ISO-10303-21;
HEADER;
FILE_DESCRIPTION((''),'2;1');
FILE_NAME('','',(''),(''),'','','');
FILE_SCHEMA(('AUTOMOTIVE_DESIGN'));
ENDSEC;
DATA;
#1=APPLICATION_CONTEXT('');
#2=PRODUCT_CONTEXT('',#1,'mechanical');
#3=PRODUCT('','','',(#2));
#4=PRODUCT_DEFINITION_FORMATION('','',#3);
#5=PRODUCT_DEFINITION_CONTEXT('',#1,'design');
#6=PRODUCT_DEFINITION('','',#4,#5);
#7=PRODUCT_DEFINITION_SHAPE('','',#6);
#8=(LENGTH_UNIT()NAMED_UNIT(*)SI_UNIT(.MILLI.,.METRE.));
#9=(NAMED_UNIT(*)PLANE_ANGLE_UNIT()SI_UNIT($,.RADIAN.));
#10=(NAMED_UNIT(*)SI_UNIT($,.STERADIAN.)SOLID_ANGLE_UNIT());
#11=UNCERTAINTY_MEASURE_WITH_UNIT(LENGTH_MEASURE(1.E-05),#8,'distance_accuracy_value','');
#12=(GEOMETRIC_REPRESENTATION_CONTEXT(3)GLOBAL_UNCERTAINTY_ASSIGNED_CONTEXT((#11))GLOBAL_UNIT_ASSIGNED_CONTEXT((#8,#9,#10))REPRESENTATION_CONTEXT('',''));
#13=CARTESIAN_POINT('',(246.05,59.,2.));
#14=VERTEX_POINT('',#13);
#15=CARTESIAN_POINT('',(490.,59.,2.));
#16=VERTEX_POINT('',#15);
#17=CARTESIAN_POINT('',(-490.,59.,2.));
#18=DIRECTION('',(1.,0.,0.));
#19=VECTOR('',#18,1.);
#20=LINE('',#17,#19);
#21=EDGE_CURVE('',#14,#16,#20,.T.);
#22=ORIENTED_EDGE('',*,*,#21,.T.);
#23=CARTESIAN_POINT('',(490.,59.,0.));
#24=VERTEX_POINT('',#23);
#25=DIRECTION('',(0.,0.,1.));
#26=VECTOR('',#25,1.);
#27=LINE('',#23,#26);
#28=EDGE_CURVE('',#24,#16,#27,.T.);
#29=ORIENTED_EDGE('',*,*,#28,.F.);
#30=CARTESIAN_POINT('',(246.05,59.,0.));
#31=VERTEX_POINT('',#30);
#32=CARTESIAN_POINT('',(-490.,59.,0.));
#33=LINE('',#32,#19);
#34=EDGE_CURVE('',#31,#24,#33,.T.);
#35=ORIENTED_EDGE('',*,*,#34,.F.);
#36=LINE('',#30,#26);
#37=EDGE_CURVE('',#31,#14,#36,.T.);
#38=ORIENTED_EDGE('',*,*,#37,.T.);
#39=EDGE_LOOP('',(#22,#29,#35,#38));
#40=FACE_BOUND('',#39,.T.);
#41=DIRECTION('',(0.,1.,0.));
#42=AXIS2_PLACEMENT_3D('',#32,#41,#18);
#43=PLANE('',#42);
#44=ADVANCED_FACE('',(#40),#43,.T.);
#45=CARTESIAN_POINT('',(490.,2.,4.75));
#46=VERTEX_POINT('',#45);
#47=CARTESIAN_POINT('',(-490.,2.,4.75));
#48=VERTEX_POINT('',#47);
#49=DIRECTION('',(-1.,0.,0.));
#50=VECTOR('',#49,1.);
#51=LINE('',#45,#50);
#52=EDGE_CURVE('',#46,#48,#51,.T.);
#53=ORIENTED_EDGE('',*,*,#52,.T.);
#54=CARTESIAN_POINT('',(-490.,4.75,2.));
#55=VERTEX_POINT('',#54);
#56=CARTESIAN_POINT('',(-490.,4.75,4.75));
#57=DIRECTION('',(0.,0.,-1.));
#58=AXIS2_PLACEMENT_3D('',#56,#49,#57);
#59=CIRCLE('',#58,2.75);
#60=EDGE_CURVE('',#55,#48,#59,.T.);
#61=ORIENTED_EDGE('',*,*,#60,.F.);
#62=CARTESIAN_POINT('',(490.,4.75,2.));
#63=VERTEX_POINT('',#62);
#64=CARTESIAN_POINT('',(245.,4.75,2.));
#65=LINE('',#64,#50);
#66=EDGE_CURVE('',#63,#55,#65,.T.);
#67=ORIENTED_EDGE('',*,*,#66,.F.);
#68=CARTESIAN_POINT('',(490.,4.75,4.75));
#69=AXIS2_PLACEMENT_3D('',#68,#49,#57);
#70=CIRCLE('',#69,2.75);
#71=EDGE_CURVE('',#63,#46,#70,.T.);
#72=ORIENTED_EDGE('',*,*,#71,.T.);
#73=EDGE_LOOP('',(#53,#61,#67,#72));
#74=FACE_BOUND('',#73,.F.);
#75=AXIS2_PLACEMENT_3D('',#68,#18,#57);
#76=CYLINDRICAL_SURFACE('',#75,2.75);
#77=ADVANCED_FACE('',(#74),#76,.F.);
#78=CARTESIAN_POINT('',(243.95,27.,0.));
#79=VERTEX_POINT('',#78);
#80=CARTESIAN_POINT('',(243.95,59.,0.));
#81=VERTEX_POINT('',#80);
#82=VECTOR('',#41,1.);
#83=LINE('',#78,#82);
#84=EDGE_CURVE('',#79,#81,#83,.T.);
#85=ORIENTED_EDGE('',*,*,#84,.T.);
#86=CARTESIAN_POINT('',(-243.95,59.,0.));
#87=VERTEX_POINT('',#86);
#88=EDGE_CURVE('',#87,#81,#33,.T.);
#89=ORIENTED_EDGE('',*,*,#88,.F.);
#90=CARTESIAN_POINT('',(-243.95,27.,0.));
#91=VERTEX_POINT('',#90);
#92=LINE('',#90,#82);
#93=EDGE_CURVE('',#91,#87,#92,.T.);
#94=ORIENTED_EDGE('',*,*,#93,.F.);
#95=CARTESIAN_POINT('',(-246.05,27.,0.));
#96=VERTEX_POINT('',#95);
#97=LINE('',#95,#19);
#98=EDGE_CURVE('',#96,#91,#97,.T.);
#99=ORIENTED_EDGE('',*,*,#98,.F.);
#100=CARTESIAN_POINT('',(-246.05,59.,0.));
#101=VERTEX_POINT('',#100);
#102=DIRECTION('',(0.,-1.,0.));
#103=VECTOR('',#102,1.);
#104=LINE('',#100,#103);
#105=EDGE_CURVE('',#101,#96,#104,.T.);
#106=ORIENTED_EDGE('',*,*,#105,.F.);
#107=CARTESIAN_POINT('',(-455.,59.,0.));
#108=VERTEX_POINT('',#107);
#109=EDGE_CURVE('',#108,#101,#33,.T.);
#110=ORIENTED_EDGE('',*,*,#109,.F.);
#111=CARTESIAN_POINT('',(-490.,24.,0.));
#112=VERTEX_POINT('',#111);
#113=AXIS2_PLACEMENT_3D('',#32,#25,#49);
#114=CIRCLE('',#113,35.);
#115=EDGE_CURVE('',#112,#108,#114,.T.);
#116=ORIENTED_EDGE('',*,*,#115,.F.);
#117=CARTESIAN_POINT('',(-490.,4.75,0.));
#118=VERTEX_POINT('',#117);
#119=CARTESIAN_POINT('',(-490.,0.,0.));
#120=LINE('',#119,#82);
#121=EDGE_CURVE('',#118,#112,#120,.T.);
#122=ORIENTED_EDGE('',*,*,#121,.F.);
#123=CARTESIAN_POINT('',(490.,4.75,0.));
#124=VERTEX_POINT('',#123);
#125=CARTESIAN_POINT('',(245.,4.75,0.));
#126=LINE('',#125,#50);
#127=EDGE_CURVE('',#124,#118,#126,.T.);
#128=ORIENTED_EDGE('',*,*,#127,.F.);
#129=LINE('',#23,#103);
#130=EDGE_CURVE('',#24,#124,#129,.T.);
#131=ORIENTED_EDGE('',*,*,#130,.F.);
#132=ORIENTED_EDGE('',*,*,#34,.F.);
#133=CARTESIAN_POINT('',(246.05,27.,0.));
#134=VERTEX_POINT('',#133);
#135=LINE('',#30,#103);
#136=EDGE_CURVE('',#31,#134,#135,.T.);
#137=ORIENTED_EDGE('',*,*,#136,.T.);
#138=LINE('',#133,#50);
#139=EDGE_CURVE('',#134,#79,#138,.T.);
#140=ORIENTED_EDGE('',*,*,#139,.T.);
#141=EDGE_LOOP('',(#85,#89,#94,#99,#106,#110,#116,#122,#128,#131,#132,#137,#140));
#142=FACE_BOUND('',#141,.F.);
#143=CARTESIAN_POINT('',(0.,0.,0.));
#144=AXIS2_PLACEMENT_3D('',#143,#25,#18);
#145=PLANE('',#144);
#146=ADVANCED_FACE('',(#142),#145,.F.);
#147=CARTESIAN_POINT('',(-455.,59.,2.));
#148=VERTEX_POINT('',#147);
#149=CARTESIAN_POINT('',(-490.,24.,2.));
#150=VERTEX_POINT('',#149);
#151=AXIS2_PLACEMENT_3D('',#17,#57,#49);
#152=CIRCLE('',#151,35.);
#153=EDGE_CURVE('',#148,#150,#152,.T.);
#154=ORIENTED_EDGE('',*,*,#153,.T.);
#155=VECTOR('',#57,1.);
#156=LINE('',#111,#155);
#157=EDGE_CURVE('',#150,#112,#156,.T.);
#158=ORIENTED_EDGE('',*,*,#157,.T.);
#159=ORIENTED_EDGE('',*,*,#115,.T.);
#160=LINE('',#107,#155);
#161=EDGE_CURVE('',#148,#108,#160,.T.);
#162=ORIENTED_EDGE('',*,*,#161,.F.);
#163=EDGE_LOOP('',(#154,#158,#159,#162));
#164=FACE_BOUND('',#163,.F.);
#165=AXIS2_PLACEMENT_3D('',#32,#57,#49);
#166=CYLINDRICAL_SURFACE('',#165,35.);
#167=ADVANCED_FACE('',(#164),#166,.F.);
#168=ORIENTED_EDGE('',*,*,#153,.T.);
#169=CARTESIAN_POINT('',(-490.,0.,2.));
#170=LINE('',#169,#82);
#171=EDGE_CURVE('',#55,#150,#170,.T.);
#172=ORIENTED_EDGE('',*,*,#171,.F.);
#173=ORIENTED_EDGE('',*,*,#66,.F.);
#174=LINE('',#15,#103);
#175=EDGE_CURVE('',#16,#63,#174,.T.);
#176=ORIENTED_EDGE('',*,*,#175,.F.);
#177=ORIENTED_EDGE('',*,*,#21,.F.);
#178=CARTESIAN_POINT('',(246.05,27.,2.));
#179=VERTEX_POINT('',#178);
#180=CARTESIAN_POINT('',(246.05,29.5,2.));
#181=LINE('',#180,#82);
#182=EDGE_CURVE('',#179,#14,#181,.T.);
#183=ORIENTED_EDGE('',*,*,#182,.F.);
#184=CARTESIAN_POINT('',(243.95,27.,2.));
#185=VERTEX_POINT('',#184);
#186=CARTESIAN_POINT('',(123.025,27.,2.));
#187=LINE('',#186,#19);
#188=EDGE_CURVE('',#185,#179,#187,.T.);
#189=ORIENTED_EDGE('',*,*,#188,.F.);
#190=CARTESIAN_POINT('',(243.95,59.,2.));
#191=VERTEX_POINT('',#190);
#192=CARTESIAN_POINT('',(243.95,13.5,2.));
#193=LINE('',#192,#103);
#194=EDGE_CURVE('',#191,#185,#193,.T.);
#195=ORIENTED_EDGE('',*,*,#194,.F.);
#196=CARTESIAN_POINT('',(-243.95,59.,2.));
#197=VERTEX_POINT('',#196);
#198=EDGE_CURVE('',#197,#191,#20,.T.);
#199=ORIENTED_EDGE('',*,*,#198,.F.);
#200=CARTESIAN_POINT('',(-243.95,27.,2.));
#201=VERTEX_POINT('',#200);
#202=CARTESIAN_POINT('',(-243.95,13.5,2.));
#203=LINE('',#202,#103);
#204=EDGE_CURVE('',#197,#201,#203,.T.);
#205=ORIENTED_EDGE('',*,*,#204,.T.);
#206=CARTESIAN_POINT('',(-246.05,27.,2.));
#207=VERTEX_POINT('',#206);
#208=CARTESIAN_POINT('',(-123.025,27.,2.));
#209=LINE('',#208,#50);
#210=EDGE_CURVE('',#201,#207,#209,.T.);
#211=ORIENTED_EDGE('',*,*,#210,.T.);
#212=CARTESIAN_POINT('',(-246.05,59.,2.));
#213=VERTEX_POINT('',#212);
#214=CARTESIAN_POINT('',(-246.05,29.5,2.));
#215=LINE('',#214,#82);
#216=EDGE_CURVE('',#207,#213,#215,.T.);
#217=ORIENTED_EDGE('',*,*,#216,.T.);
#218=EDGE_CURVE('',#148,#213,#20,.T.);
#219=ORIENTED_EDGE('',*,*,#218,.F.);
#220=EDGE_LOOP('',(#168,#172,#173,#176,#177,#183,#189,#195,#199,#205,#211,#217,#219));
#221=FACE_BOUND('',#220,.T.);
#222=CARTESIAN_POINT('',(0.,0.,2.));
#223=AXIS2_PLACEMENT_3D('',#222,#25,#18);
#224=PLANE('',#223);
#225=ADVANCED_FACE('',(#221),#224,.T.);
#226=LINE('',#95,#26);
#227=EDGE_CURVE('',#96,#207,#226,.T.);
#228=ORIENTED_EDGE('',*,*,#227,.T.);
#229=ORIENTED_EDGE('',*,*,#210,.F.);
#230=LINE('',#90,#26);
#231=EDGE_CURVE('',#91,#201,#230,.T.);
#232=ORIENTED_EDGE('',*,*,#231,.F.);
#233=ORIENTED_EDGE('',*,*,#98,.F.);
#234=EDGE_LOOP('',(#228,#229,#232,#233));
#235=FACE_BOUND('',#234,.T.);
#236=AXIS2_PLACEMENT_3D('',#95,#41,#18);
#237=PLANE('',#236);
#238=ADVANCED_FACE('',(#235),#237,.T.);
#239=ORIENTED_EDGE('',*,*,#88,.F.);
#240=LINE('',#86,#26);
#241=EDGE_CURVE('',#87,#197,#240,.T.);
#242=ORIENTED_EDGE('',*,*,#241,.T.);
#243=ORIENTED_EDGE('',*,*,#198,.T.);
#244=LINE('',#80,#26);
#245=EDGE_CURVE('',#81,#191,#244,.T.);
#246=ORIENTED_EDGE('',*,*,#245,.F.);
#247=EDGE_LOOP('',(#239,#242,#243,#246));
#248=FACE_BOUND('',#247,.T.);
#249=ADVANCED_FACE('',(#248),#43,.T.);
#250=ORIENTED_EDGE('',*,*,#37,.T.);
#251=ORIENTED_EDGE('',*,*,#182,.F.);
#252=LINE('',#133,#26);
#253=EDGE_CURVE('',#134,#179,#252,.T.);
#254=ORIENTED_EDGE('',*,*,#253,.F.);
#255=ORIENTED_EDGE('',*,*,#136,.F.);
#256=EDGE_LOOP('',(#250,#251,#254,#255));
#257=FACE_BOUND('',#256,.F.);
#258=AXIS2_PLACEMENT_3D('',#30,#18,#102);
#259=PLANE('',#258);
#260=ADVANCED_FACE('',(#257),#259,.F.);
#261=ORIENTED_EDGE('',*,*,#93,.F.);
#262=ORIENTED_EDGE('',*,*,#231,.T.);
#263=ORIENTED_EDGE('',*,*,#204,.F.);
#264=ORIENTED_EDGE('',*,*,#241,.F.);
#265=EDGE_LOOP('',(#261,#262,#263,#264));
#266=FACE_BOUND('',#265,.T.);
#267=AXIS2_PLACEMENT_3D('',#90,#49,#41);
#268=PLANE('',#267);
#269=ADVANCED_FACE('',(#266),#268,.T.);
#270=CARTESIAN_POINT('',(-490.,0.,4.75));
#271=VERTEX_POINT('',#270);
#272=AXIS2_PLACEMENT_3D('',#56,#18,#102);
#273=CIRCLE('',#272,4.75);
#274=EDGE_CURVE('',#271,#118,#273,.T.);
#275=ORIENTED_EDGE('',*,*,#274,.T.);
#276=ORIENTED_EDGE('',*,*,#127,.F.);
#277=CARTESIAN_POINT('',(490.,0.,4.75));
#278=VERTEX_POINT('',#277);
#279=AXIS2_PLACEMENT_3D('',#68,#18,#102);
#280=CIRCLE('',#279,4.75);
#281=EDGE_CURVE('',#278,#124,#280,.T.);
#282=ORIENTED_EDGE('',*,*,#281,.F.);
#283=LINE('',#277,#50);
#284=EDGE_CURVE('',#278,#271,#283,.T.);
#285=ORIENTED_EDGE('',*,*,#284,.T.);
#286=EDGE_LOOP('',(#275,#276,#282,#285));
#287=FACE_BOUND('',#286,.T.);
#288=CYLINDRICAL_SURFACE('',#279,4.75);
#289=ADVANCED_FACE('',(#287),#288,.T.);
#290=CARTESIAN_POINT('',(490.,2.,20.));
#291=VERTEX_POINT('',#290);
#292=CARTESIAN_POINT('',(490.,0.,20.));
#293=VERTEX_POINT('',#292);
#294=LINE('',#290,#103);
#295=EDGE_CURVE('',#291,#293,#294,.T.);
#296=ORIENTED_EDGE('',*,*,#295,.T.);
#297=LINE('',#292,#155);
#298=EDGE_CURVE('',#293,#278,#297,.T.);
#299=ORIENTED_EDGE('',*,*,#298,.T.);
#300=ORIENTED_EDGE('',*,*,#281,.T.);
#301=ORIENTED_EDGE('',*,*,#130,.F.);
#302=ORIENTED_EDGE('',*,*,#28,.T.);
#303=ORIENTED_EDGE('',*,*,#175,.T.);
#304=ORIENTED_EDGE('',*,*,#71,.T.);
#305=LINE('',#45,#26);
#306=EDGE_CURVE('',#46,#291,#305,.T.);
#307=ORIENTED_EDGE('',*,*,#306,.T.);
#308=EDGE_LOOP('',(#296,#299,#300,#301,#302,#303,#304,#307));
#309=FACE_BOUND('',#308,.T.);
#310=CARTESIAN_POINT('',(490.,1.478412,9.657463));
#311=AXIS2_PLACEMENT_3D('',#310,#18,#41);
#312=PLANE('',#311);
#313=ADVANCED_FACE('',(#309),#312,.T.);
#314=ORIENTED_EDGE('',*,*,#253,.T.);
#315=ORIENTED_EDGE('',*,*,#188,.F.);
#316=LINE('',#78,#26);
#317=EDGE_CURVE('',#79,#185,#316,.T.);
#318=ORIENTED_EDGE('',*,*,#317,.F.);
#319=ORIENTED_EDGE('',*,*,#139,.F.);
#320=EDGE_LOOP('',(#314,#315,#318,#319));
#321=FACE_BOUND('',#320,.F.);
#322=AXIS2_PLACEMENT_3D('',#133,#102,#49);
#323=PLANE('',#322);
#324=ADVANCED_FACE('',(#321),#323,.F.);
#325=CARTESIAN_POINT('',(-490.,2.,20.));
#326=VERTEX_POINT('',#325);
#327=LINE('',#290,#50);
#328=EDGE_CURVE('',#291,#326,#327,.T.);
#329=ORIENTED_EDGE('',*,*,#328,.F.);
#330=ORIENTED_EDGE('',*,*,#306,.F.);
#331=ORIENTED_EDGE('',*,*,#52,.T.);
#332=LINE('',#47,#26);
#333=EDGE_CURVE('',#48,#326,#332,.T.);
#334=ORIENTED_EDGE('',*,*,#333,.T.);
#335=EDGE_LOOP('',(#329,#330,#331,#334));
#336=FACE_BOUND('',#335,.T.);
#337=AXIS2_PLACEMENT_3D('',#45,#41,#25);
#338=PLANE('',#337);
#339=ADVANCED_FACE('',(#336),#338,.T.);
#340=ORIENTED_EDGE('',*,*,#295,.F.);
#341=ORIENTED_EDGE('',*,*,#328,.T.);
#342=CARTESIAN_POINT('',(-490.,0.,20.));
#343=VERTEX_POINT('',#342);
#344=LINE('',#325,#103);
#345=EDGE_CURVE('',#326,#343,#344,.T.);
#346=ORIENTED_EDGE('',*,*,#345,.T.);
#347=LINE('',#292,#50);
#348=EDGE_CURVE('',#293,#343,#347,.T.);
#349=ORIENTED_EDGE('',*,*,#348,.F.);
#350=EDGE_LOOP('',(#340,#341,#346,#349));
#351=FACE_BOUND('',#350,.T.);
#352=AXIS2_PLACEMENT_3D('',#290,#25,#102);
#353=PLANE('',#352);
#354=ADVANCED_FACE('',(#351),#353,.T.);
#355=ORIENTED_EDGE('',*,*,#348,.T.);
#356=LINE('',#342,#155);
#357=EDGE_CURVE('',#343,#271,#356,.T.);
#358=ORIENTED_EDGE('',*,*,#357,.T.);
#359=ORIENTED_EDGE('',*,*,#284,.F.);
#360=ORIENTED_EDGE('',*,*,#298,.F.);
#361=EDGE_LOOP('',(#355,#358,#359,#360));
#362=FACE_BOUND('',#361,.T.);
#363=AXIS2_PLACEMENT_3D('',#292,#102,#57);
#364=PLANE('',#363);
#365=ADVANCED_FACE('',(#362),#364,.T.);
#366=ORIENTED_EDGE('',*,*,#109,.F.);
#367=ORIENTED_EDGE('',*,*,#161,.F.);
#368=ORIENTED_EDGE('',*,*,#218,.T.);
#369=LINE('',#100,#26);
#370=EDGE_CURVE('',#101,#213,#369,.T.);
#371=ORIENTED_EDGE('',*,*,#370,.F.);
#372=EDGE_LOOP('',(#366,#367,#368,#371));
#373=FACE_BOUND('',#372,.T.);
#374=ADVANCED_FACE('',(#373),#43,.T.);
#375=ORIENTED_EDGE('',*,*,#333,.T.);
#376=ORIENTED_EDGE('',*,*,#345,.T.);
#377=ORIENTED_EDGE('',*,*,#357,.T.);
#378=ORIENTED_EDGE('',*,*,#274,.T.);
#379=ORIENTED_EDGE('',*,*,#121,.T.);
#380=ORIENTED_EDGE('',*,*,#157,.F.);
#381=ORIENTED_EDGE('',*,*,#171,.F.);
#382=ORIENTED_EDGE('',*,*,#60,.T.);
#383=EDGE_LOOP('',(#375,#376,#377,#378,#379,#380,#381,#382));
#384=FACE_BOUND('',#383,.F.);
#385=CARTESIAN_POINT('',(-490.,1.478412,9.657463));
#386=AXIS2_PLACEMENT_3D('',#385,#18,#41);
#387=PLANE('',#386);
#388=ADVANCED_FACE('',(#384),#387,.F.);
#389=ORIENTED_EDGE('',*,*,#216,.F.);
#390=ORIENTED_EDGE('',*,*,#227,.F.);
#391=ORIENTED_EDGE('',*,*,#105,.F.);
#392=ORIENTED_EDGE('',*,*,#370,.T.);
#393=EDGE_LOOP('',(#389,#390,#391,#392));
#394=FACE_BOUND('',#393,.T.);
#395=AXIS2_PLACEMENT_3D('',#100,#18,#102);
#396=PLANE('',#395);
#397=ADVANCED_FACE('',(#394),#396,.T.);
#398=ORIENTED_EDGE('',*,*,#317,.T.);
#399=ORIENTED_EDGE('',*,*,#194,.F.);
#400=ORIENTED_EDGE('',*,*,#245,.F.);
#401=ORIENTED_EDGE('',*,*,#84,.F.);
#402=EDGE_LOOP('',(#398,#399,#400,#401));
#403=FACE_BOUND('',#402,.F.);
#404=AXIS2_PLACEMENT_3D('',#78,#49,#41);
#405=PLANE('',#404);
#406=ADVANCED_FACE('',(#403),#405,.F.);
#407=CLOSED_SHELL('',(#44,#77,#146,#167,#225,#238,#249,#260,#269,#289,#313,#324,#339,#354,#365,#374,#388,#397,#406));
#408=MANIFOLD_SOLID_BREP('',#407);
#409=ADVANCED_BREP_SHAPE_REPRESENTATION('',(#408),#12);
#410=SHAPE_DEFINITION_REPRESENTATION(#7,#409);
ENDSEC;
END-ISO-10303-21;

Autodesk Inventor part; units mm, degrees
ref_plane "YZ Plane" through (0, 0, 0) normal (1, 0, 0) x (0, 1, 0)
ref_plane "XZ Plane" through (0, 0, 0) normal (0, 1, 0) x (-1, 0, 0)
ref_plane "XY Plane" through (0, 0, 0) normal (0, 0, 1) x (1, 0, 0)
sketch "Sketch1" plane through (0, 0, 0) normal (0, 0, 1) x (1, 0, 0)
  line L0 (-490, 59) -> (490, 59)
  line L1 (490, 59) -> (490, 0)
  line L2 (490, 0) -> (-490, 0)
  line L3 (-490, 0) -> (-490, 59)
  point P0 (0, 0)
  point P1 (0, 0)
  dimension "d0" = 980
  dimension "d1" = 59
extrude "Plate1" add sketch "Sketch1" along normal blind 2
sketch "Sketch2" plane through (490, 2, 0) normal (0, -1, 0) x (1, 0, 0)
  line L0 (-980, 0) -> (0, 0)
  line L1 (0, 0) -> (0, 20)
  line L2 (0, 20) -> (-980, 20)
  line L3 (-980, 20) -> (-980, 0)
edge flange "Flange1" height 20 angle 90 thickness 2 bend radius 2.75 thickness toward (0, -1, 0) relief round relief width 2 relief depth 1 edges at (0, 0, 2) wall of the first edge with corners at (-490, 2, 0) (490, 2, 0) (490, 2, 20) (-490, 2, 20)
bend "Bend1"
corner "Corner1"
sketch "Sketch5" plane through (0, 0, 0) normal (0, 0, -1) x (-1, 0, 0)
  line L0 (490, 59) -> (-490, 59) projected
  line L1 (490, 0) -> (-490, 0) projected
  circle A0 centre (0, 59) radius 35
  line L2 (243.95, 59) -> (246.05, 59)
  line L3 (246.05, 59) -> (246.05, 27)
  line L4 (246.05, 27) -> (243.95, 27)
  line L5 (243.95, 27) -> (243.95, 59)
  line L6 (-243.95, 59) -> (-246.05, 59)
  line L7 (-246.05, 59) -> (-246.05, 27)
  line L8 (-246.05, 27) -> (-243.95, 27)
  line L9 (-243.95, 27) -> (-243.95, 59)
  line L10 (0, 59) -> (0, 0) construction
  circle A1 centre (-490, 59) radius 35
  circle A2 centre (490, 59) radius 35
  point P0 (0, 0)
  point P1 (245, 27)
  point P2 (-245, 27)
  point P3 (246.05, 59)
  point P4 (-35, 59)
  point P5 (35, 59)
  point P6 (-246.05, 59)
  dimension "d45" = 70
  dimension "d48" = 2.1
  dimension "d49" = 490
  dimension "d51" = 27
  dimension "d52" = 32
extrude "Extrusion1" cut sketch "Sketch5" against normal through all contours L3 L4 L5 L0 | L9 L8 L7 L0 | A2
sketch "Sketch9" plane through (0, 0, 2) normal (0, 0, 1) x (1, 0, 0)
  line L0 (485.6141, 29.596) -> (485.6141, 17.596) construction
  line L1 (485.6141, 17.596) -> (285.6141, 17.596) construction
  line L2 (285.6141, 17.596) -> (285.6141, 29.596) construction
  line L3 (285.6141, 29.596) -> (485.6141, 29.596) construction
  line L4 (-490, 59) -> (490, 59) projected
  point P0 (0, 0)
  point P1 (1.05, 68)
  point P2 (490, 59)
  dimension "d40" = 200
  dimension "d41" = 12
mark "Mark2"
equation "\"d2\" = Thickness"
equation "\"d3\" = BendReliefWidth"
equation "\"d4\" = BendReliefDepth"
equation "\"d5\" = MinimumRemnant"
equation "\"d6\" = TransitionRadius"
equation "\"d9\" = BendRadius"
equation "\"d10\" = CornerReliefSize"
equation "\"d11\" = GapSize"
equation "\"d12\" = JacobiRadiusSize"
equation "\"BendReliefWidth\" = Thickness"
equation "\"BendReliefDepth\" = 0.5 * Thickness"
equation "\"CornerReliefSize\" = 4 * Thickness"
equation "\"MinimumRemnant\" = 2 * Thickness"
equation "\"TransitionRadius\" = BendRadius"
equation "\"JacobiRadiusSize\" = BendRadius"
equation "\"GapSize\" = Thickness"
equation "\"Thickness\" = 2"
equation "\"BendRadius\" = 2.75"
properties part number "MSC 323 STRINGER BOARD  #" material "Stainless Steel"
